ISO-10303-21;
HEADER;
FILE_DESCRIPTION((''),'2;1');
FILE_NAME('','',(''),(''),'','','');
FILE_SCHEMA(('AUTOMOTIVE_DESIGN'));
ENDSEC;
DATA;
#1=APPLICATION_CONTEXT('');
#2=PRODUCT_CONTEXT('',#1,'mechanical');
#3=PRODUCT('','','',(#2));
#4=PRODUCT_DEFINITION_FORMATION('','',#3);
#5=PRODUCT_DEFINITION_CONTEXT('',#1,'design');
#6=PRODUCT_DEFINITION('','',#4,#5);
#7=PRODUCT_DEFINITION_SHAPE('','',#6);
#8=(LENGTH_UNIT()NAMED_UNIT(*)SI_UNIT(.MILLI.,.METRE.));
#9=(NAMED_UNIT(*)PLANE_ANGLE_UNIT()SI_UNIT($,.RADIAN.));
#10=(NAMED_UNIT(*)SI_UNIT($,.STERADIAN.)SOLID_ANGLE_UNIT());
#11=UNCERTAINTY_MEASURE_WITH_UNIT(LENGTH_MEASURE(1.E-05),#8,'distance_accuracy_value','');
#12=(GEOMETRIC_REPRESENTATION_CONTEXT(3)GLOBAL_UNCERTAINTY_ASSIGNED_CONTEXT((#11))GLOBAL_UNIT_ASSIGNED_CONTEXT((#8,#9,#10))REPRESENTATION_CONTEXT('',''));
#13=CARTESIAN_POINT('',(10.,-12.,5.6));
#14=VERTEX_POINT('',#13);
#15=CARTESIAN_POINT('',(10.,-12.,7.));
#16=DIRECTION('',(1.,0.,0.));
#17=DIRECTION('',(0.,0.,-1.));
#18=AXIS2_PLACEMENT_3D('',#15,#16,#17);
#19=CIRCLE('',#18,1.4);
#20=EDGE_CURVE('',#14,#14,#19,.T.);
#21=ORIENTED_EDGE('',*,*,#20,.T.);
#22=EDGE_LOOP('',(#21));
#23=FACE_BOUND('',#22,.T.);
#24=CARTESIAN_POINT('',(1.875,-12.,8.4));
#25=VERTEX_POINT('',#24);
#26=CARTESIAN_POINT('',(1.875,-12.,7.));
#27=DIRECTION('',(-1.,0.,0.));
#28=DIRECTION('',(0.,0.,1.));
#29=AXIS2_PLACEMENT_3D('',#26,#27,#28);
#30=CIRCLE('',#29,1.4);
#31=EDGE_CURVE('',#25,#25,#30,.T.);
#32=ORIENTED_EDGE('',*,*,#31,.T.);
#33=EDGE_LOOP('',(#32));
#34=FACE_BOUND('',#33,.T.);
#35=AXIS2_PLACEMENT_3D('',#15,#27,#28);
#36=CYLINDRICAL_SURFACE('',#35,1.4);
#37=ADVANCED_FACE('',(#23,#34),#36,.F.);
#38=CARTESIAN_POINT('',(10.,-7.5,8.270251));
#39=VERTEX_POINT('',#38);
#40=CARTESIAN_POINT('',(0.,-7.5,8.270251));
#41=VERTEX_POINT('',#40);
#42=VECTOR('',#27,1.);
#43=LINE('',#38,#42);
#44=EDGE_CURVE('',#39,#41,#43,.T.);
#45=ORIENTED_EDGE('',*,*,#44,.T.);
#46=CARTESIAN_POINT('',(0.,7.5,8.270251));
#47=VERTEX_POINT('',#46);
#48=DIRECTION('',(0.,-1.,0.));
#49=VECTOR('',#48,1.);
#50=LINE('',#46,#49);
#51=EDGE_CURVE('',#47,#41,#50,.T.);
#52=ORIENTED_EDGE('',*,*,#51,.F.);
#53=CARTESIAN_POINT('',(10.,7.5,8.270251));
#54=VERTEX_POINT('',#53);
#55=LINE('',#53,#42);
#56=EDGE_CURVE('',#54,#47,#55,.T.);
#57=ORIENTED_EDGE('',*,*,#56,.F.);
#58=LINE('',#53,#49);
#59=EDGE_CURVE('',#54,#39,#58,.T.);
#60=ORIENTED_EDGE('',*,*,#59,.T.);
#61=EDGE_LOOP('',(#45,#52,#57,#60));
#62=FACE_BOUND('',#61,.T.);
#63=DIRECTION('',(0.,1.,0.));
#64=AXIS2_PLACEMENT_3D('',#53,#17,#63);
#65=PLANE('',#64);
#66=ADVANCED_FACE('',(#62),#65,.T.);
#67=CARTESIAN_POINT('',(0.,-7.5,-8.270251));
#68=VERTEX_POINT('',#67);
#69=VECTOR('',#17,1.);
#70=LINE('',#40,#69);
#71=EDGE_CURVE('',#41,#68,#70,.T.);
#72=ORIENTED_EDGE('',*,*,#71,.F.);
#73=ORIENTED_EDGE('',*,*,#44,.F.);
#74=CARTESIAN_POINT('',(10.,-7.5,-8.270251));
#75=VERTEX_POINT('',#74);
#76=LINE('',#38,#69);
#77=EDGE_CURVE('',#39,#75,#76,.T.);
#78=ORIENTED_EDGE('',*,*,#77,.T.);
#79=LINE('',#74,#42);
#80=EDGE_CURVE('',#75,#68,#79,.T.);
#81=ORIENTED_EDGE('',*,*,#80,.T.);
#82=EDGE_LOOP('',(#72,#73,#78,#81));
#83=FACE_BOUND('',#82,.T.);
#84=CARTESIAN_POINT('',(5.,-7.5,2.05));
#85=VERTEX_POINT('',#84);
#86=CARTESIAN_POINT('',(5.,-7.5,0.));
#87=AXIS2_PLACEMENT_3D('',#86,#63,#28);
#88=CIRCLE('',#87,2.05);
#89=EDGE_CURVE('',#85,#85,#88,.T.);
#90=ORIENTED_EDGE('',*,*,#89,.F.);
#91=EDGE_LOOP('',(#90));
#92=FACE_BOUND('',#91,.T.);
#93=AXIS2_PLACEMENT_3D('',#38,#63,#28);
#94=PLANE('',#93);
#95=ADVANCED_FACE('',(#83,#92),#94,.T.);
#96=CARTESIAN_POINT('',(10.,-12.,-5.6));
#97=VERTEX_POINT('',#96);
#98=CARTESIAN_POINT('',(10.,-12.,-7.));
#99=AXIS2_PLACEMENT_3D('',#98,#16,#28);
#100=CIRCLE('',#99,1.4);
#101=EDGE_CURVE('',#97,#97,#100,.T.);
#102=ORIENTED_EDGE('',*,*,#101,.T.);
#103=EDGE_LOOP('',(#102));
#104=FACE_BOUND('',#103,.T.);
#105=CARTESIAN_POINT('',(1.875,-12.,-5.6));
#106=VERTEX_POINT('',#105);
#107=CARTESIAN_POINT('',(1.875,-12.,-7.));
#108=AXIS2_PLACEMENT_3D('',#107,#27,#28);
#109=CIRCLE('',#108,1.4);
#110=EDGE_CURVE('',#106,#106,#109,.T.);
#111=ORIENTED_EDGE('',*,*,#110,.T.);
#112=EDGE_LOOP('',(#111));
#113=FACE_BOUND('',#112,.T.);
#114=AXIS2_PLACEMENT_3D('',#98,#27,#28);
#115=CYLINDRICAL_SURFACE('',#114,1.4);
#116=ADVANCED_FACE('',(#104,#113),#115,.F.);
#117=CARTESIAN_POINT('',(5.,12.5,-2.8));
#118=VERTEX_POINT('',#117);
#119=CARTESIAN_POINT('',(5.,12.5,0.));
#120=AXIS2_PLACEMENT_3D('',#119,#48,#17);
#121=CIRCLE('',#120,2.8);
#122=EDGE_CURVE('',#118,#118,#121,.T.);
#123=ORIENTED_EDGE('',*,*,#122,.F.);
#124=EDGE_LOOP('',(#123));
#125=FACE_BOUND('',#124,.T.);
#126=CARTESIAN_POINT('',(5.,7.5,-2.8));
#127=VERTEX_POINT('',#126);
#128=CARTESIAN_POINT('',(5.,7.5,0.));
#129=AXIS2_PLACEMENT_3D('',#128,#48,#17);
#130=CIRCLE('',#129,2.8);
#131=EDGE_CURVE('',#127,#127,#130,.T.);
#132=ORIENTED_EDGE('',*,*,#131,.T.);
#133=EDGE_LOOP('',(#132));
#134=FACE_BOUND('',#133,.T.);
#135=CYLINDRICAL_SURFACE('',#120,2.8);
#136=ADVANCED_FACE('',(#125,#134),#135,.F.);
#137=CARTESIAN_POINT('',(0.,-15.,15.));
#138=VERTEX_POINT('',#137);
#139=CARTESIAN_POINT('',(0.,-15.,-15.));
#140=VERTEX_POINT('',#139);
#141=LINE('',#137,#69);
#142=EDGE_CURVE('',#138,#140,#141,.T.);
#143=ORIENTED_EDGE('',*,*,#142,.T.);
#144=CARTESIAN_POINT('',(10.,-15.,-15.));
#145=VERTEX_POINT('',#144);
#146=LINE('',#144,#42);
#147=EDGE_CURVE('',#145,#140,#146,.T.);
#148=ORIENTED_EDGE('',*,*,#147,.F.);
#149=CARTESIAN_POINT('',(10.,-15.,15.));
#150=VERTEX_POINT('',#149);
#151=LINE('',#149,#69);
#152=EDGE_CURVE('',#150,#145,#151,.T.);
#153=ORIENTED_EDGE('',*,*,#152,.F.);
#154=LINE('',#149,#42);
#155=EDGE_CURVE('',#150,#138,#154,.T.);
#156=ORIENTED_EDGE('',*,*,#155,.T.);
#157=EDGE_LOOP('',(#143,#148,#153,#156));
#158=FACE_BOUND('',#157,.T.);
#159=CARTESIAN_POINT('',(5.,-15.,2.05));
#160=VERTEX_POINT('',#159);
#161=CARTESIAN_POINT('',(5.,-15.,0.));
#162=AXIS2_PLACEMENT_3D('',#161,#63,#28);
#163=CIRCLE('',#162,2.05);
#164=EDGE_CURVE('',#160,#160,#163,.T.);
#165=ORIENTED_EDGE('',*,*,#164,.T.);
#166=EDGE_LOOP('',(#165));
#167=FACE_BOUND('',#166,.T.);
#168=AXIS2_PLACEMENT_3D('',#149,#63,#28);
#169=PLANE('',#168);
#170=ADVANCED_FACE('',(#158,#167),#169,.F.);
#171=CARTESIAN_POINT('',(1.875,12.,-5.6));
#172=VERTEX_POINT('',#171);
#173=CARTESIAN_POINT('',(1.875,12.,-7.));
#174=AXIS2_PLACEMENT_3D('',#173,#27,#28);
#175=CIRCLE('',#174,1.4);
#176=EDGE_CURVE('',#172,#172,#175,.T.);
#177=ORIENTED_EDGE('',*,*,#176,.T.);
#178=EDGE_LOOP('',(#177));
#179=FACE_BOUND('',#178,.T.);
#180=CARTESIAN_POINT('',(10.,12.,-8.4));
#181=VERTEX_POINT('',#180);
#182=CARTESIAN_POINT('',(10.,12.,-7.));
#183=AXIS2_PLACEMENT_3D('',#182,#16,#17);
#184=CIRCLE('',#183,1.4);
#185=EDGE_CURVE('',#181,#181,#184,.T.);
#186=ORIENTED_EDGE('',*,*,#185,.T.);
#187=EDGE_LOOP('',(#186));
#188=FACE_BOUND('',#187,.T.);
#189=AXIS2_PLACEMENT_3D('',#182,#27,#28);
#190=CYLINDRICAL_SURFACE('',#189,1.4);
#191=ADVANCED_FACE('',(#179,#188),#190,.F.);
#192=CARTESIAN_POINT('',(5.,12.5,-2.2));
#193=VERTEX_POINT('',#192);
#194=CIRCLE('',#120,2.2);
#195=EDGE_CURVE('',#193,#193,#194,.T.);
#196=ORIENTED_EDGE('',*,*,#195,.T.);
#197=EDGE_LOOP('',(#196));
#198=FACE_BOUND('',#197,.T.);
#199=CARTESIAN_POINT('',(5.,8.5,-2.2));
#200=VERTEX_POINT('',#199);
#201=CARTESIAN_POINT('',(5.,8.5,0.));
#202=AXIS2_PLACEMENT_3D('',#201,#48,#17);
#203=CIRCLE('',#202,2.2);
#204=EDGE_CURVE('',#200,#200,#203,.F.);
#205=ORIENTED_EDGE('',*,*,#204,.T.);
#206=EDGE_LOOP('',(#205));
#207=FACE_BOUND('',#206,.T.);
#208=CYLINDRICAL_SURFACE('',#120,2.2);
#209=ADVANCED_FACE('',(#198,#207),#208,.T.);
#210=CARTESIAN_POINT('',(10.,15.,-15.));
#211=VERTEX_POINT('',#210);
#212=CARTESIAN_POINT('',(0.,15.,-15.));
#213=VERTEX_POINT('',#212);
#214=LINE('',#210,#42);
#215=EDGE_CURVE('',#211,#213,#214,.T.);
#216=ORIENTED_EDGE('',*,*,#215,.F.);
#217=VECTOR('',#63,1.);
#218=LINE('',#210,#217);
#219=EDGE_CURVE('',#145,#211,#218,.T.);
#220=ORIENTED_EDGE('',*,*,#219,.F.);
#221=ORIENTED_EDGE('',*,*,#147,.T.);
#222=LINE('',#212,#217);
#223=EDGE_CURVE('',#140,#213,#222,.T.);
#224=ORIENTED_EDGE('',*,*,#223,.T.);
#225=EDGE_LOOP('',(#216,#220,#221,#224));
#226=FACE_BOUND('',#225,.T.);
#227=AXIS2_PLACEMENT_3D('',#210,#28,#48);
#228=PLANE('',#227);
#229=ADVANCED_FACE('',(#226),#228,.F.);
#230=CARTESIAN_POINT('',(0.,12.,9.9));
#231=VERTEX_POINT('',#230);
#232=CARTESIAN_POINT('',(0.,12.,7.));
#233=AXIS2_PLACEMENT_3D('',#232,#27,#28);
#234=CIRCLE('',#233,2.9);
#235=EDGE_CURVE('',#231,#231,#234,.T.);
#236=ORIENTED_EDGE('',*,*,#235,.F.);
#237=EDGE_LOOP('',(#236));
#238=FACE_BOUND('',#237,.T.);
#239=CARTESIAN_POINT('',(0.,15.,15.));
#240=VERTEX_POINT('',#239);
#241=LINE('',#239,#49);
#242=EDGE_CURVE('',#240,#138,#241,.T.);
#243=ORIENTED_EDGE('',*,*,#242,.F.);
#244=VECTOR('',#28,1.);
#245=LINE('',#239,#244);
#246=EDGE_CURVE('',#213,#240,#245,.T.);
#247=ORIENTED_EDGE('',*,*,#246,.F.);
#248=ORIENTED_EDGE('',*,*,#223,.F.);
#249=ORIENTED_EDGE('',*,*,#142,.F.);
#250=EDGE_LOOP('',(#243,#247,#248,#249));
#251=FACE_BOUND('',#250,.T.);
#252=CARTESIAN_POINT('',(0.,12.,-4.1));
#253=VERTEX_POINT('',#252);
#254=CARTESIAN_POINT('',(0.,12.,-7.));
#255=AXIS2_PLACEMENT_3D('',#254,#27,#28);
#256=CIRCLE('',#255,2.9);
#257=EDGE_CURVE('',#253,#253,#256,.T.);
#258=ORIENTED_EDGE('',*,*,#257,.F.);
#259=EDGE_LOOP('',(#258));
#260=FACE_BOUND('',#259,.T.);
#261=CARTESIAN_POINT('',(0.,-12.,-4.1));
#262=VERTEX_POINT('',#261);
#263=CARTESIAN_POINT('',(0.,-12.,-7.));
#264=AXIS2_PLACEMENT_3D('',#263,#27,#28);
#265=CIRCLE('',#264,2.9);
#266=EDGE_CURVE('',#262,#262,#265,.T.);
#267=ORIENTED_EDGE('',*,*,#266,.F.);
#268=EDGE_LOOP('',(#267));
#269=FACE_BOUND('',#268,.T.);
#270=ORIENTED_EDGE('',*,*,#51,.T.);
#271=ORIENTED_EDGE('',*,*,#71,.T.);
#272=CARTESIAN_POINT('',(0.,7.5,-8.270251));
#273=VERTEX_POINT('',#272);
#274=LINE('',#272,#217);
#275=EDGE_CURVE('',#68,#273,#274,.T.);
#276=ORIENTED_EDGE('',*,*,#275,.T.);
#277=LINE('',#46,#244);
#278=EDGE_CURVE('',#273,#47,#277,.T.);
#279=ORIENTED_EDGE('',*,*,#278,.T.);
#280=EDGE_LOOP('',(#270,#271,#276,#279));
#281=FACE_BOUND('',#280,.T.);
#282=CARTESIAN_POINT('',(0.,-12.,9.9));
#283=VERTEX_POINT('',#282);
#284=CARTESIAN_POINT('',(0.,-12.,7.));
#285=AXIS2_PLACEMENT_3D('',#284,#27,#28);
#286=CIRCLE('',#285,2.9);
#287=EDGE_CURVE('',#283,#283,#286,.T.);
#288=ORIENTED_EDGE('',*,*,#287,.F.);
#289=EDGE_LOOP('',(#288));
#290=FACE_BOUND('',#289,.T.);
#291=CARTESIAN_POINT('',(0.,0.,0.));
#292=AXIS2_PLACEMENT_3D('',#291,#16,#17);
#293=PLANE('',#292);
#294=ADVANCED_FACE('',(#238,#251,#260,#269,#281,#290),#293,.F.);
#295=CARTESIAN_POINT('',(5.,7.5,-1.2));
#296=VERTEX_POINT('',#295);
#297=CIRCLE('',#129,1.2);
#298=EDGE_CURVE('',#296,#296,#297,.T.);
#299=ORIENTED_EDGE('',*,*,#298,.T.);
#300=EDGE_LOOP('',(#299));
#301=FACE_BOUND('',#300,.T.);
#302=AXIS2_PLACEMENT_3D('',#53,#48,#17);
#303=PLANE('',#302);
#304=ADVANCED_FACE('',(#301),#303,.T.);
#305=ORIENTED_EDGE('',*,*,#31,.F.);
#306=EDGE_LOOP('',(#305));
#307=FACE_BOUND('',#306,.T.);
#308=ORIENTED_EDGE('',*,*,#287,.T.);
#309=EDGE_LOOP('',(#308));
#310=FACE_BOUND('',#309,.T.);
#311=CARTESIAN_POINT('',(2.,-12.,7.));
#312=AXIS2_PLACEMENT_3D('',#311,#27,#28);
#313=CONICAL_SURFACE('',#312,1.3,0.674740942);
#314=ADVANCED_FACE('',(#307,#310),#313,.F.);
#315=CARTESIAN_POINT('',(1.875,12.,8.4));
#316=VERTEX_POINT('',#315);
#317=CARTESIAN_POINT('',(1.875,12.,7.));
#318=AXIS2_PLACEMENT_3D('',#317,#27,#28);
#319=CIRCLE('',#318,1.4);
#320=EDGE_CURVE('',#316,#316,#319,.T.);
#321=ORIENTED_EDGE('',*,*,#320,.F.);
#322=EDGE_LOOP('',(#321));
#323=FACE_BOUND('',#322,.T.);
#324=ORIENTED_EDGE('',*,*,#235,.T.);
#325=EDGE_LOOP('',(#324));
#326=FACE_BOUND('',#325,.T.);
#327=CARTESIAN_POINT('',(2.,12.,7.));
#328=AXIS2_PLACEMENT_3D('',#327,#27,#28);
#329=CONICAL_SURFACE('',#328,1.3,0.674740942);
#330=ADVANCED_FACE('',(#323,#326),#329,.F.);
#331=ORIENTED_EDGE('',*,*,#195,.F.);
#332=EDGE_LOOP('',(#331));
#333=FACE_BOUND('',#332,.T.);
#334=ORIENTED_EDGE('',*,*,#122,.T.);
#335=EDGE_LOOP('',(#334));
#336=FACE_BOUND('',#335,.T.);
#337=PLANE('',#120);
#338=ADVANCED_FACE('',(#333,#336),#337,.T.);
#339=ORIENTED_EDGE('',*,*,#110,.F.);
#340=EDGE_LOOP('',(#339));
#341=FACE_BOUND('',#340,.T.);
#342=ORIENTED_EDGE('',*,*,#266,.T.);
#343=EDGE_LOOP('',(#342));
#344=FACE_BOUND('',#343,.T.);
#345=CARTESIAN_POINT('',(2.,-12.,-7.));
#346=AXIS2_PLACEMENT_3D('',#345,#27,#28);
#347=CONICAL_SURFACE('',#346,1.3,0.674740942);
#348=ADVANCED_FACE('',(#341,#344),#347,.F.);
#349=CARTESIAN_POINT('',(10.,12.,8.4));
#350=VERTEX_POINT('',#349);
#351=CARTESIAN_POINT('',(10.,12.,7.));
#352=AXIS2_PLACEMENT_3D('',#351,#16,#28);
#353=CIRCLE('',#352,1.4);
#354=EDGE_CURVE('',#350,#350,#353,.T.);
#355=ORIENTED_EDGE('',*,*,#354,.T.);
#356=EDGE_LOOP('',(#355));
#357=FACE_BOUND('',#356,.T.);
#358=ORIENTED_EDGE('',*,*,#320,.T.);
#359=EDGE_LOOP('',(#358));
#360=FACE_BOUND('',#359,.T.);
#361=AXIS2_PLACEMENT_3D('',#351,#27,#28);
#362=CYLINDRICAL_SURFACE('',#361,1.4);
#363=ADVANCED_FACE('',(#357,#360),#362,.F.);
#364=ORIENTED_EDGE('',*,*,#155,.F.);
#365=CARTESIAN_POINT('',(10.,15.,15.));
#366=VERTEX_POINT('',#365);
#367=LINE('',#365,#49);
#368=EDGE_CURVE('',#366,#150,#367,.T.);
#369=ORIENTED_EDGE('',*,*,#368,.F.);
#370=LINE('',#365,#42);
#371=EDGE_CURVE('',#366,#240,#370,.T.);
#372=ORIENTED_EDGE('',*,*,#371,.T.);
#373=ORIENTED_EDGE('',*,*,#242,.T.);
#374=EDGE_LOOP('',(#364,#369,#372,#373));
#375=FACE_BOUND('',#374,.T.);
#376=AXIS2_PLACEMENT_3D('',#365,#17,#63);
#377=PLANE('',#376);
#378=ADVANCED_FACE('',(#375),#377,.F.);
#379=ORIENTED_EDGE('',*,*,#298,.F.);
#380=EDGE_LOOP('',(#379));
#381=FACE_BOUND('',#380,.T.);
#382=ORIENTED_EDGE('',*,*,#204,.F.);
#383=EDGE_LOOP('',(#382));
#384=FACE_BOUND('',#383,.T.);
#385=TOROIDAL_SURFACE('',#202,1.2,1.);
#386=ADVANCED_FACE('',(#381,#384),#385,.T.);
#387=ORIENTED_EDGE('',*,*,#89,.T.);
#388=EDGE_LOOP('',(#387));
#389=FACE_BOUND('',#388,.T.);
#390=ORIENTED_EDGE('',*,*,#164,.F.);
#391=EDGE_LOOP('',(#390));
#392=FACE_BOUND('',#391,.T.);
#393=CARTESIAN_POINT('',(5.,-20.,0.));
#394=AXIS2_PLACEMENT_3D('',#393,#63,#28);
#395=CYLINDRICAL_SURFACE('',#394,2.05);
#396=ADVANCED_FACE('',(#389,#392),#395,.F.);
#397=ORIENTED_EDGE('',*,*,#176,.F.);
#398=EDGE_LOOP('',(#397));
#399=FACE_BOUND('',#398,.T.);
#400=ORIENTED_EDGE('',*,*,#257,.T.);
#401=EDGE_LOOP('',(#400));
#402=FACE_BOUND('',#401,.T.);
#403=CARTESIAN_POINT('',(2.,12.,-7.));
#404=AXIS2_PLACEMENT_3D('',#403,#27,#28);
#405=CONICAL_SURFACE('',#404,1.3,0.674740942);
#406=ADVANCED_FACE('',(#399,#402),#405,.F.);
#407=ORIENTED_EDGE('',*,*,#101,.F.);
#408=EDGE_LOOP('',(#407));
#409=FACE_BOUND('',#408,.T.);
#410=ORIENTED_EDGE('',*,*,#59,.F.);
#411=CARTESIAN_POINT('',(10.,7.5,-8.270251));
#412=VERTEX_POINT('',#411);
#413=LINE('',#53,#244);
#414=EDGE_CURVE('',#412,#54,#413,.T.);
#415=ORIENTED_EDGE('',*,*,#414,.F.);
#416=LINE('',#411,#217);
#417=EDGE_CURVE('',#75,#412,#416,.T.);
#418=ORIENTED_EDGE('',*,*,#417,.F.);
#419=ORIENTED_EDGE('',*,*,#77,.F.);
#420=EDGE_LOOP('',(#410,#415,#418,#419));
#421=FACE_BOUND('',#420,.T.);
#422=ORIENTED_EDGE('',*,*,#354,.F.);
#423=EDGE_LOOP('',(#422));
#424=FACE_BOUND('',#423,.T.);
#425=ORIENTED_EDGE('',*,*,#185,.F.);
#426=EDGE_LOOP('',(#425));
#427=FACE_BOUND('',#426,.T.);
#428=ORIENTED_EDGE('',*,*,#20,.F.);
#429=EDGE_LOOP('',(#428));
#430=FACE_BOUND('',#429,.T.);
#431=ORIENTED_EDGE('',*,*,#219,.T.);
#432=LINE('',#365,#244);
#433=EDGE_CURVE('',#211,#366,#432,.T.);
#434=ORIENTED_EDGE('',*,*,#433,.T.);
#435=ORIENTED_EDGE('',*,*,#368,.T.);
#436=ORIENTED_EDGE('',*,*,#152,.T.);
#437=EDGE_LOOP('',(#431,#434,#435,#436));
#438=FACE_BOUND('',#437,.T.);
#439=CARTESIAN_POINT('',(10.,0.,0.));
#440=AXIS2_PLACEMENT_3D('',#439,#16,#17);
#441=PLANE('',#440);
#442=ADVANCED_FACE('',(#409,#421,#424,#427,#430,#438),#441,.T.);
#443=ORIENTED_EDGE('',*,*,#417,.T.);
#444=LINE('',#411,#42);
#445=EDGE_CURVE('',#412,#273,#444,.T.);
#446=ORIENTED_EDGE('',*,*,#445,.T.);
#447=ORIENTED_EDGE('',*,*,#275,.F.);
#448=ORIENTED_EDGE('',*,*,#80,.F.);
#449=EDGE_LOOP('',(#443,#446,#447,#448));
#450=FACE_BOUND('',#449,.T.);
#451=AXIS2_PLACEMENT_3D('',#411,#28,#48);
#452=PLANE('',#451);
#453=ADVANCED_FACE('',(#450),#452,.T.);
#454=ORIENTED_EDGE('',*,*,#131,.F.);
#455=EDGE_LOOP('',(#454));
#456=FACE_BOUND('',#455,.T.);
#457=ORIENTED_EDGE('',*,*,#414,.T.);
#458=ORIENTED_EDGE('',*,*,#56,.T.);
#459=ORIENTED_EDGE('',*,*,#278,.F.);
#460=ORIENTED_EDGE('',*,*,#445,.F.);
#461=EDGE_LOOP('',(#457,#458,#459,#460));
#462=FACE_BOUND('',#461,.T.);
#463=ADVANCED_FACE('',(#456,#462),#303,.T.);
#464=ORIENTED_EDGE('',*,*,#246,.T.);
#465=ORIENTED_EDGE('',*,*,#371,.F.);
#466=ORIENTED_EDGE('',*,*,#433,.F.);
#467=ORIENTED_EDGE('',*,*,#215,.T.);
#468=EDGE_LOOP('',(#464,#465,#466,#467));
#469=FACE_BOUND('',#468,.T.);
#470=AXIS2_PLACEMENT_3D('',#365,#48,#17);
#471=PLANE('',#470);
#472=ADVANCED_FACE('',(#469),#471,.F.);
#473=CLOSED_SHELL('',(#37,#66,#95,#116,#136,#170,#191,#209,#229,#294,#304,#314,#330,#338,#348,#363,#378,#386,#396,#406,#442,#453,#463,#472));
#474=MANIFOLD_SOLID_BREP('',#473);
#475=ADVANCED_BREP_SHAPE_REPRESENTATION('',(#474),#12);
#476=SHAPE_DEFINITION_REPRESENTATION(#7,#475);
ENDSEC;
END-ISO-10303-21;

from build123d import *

# Parameters (mm, degrees)
SKETCH_1_W          = 30
SKETCH_1_H          = 30
SKETCH_1_W_2        = 16.540501684
SKETCH_1_H_2        = 15
EXTRUDE_1_DEPTH     = 10
SKETCH_4_R          = 1.4
CUT_EXTRUDE_3_DEPTH = 24.452078799
SKETCH_8_R          = 2.9
CUT_EXTRUDE_6_DEPTH = 2
CHAMFER_1_SIZE      = 2
CHAMFER_1_SIZE_2    = 1.6
SKETCH_5_R          = 2.05
CUT_EXTRUDE_7_DEPTH = 20
SKETCH_9_R          = 2.8
SKETCH_9_R_2        = 2.2
CUT_EXTRUDE_8_DEPTH = 5
FILLET_1_R          = 1


with BuildPart() as part:
    # 스케치1 → 보스-돌출1 (new body)
    with BuildSketch(Plane(origin=(0, 0, 0), x_dir=(0, 0, -1), z_dir=(1, 0, 0))):
        Rectangle(SKETCH_1_W, SKETCH_1_H)
        Rectangle(SKETCH_1_W_2, SKETCH_1_H_2, mode=Mode.SUBTRACT)
    extrude(amount=EXTRUDE_1_DEPTH)

    # 스케치4 → 컷-돌출3 (cut, through all)
    with BuildSketch(Plane(origin=(0, 0, 0), x_dir=(0, 0, -1), z_dir=(1, 0, 0))):
        with Locations((-7, -12)):
            Circle(SKETCH_4_R)
        with Locations(Location((-7, 12, 0), (0, 0, 180))):
            Circle(SKETCH_4_R)
        with Locations(Location((7, -12, 0), (0, 0, 180))):
            Circle(SKETCH_4_R)
        with Locations((7, 12)):
            Circle(SKETCH_4_R)
    extrude(amount=CUT_EXTRUDE_3_DEPTH, mode=Mode.SUBTRACT)

    # 스케치8 → 컷-돌출6 (cut)
    with BuildSketch(Plane.ZY):
        with Locations((-7, 12)):
            Circle(SKETCH_8_R)
        with Locations((7, 12)):
            Circle(SKETCH_8_R)
        with Locations((-7, -12)):
            Circle(SKETCH_8_R)
        with Locations((7, -12)):
            Circle(SKETCH_8_R)
    extrude(amount=-CUT_EXTRUDE_6_DEPTH, mode=Mode.SUBTRACT)

    # 모따기1
    # the kernel refuses this chamfer: 2, 1.6 mm, written as the material it adds along each edge
    with BuildSketch(Plane(origin=(2, -12, 7), x_dir=(0, 0, 1), z_dir=(0, -1, 0))) as chamfer_1_piece_1_section:
        Polygon((2.9, CHAMFER_1_SIZE), (2.9 - CHAMFER_1_SIZE_2, 0), (2.9, 0), align=None)
    chamfer_1_piece_1 = revolve(axis=Axis((2, -12, 7), (-1, 0, 0)), mode=Mode.PRIVATE)
    chamfer_1_piece_1 = split(chamfer_1_piece_1, bisect_by=Plane(origin=(0, -12, 4.826759692), z_dir=(1, 0, 0)), keep=Keep.TOP, mode=Mode.PRIVATE)
    chamfer_1_piece_1 = chamfer_1_piece_1 - Plane(origin=(0.956092246, -12, 7), x_dir=(0, 0, -1), z_dir=(-1, 0, 0)) * Cylinder(1.4, 12, mode=Mode.PRIVATE)
    add(chamfer_1_piece_1)
    with BuildSketch(Plane(origin=(2, 12, 7), x_dir=(0, 0, 1), z_dir=(0, -1, 0))) as chamfer_1_piece_2_section:
        Polygon((2.9, CHAMFER_1_SIZE), (2.9 - CHAMFER_1_SIZE_2, 0), (2.9, 0), align=None)
    chamfer_1_piece_2 = revolve(axis=Axis((2, 12, 7), (-1, 0, 0)), mode=Mode.PRIVATE)
    chamfer_1_piece_2 = split(chamfer_1_piece_2, bisect_by=Plane(origin=(0, 12, 4.826759692), z_dir=(1, 0, 0)), keep=Keep.TOP, mode=Mode.PRIVATE)
    chamfer_1_piece_2 = chamfer_1_piece_2 - Plane(origin=(0.956092246, 12, 7), x_dir=(0, 0, 1), z_dir=(-1, 0, 0)) * Cylinder(1.4, 12, mode=Mode.PRIVATE)
    add(chamfer_1_piece_2)
    with BuildSketch(Plane(origin=(2, 12, -7), x_dir=(0, 0, 1), z_dir=(0, -1, 0))) as chamfer_1_piece_3_section:
        Polygon((2.9, CHAMFER_1_SIZE), (2.9 - CHAMFER_1_SIZE_2, 0), (2.9, 0), align=None)
    chamfer_1_piece_3 = revolve(axis=Axis((2, 12, -7), (-1, 0, 0)), mode=Mode.PRIVATE)
    chamfer_1_piece_3 = split(chamfer_1_piece_3, bisect_by=Plane(origin=(0, 12, -9.173240308), z_dir=(1, 0, 0)), keep=Keep.TOP, mode=Mode.PRIVATE)
    chamfer_1_piece_3 = chamfer_1_piece_3 - Plane(origin=(0.956092246, 12, -7), x_dir=(0, 0, -1), z_dir=(-1, 0, 0)) * Cylinder(1.4, 12, mode=Mode.PRIVATE)
    add(chamfer_1_piece_3)
    with BuildSketch(Plane(origin=(2, -12, -7), x_dir=(0, 0, 1), z_dir=(0, -1, 0))) as chamfer_1_piece_4_section:
        Polygon((2.9, CHAMFER_1_SIZE), (2.9 - CHAMFER_1_SIZE_2, 0), (2.9, 0), align=None)
    chamfer_1_piece_4 = revolve(axis=Axis((2, -12, -7), (-1, 0, 0)), mode=Mode.PRIVATE)
    chamfer_1_piece_4 = split(chamfer_1_piece_4, bisect_by=Plane(origin=(0, -12, -9.173240308), z_dir=(1, 0, 0)), keep=Keep.TOP, mode=Mode.PRIVATE)
    chamfer_1_piece_4 = chamfer_1_piece_4 - Plane(origin=(0.956092246, -12, -7), x_dir=(0, 0, 1), z_dir=(-1, 0, 0)) * Cylinder(1.4, 12, mode=Mode.PRIVATE)
    add(chamfer_1_piece_4)

    # 스케치5 → 컷-돌출7 (cut)
    with BuildSketch(Plane(origin=(0, 0, 0), x_dir=(1, 0, 0), z_dir=(0, 1, 0))):
        with Locations(Location((5, 0, 0), (0, 0, 270))):
            Circle(SKETCH_5_R)
    extrude(amount=-CUT_EXTRUDE_7_DEPTH, mode=Mode.SUBTRACT)

    # 스케치9 → 컷-돌출8 (cut)
    with BuildSketch(Plane.XZ.offset(-7.5)):
        with Locations(Location((5, 0, 0), (0, 0, 270))):
            Circle(SKETCH_9_R)
        with Locations(Location((5, 0, 0), (0, 0, 270))):
            Circle(SKETCH_9_R_2, mode=Mode.SUBTRACT)
    extrude(amount=-CUT_EXTRUDE_8_DEPTH, mode=Mode.SUBTRACT)

    # 필렛1
    fillet_1_edges = [part.edges().sort_by_distance(p)[0] for p in [
        (5, 7.5, 2.2),
    ]]
    fillet(fillet_1_edges, radius=FILLET_1_R)


solid = part.part
